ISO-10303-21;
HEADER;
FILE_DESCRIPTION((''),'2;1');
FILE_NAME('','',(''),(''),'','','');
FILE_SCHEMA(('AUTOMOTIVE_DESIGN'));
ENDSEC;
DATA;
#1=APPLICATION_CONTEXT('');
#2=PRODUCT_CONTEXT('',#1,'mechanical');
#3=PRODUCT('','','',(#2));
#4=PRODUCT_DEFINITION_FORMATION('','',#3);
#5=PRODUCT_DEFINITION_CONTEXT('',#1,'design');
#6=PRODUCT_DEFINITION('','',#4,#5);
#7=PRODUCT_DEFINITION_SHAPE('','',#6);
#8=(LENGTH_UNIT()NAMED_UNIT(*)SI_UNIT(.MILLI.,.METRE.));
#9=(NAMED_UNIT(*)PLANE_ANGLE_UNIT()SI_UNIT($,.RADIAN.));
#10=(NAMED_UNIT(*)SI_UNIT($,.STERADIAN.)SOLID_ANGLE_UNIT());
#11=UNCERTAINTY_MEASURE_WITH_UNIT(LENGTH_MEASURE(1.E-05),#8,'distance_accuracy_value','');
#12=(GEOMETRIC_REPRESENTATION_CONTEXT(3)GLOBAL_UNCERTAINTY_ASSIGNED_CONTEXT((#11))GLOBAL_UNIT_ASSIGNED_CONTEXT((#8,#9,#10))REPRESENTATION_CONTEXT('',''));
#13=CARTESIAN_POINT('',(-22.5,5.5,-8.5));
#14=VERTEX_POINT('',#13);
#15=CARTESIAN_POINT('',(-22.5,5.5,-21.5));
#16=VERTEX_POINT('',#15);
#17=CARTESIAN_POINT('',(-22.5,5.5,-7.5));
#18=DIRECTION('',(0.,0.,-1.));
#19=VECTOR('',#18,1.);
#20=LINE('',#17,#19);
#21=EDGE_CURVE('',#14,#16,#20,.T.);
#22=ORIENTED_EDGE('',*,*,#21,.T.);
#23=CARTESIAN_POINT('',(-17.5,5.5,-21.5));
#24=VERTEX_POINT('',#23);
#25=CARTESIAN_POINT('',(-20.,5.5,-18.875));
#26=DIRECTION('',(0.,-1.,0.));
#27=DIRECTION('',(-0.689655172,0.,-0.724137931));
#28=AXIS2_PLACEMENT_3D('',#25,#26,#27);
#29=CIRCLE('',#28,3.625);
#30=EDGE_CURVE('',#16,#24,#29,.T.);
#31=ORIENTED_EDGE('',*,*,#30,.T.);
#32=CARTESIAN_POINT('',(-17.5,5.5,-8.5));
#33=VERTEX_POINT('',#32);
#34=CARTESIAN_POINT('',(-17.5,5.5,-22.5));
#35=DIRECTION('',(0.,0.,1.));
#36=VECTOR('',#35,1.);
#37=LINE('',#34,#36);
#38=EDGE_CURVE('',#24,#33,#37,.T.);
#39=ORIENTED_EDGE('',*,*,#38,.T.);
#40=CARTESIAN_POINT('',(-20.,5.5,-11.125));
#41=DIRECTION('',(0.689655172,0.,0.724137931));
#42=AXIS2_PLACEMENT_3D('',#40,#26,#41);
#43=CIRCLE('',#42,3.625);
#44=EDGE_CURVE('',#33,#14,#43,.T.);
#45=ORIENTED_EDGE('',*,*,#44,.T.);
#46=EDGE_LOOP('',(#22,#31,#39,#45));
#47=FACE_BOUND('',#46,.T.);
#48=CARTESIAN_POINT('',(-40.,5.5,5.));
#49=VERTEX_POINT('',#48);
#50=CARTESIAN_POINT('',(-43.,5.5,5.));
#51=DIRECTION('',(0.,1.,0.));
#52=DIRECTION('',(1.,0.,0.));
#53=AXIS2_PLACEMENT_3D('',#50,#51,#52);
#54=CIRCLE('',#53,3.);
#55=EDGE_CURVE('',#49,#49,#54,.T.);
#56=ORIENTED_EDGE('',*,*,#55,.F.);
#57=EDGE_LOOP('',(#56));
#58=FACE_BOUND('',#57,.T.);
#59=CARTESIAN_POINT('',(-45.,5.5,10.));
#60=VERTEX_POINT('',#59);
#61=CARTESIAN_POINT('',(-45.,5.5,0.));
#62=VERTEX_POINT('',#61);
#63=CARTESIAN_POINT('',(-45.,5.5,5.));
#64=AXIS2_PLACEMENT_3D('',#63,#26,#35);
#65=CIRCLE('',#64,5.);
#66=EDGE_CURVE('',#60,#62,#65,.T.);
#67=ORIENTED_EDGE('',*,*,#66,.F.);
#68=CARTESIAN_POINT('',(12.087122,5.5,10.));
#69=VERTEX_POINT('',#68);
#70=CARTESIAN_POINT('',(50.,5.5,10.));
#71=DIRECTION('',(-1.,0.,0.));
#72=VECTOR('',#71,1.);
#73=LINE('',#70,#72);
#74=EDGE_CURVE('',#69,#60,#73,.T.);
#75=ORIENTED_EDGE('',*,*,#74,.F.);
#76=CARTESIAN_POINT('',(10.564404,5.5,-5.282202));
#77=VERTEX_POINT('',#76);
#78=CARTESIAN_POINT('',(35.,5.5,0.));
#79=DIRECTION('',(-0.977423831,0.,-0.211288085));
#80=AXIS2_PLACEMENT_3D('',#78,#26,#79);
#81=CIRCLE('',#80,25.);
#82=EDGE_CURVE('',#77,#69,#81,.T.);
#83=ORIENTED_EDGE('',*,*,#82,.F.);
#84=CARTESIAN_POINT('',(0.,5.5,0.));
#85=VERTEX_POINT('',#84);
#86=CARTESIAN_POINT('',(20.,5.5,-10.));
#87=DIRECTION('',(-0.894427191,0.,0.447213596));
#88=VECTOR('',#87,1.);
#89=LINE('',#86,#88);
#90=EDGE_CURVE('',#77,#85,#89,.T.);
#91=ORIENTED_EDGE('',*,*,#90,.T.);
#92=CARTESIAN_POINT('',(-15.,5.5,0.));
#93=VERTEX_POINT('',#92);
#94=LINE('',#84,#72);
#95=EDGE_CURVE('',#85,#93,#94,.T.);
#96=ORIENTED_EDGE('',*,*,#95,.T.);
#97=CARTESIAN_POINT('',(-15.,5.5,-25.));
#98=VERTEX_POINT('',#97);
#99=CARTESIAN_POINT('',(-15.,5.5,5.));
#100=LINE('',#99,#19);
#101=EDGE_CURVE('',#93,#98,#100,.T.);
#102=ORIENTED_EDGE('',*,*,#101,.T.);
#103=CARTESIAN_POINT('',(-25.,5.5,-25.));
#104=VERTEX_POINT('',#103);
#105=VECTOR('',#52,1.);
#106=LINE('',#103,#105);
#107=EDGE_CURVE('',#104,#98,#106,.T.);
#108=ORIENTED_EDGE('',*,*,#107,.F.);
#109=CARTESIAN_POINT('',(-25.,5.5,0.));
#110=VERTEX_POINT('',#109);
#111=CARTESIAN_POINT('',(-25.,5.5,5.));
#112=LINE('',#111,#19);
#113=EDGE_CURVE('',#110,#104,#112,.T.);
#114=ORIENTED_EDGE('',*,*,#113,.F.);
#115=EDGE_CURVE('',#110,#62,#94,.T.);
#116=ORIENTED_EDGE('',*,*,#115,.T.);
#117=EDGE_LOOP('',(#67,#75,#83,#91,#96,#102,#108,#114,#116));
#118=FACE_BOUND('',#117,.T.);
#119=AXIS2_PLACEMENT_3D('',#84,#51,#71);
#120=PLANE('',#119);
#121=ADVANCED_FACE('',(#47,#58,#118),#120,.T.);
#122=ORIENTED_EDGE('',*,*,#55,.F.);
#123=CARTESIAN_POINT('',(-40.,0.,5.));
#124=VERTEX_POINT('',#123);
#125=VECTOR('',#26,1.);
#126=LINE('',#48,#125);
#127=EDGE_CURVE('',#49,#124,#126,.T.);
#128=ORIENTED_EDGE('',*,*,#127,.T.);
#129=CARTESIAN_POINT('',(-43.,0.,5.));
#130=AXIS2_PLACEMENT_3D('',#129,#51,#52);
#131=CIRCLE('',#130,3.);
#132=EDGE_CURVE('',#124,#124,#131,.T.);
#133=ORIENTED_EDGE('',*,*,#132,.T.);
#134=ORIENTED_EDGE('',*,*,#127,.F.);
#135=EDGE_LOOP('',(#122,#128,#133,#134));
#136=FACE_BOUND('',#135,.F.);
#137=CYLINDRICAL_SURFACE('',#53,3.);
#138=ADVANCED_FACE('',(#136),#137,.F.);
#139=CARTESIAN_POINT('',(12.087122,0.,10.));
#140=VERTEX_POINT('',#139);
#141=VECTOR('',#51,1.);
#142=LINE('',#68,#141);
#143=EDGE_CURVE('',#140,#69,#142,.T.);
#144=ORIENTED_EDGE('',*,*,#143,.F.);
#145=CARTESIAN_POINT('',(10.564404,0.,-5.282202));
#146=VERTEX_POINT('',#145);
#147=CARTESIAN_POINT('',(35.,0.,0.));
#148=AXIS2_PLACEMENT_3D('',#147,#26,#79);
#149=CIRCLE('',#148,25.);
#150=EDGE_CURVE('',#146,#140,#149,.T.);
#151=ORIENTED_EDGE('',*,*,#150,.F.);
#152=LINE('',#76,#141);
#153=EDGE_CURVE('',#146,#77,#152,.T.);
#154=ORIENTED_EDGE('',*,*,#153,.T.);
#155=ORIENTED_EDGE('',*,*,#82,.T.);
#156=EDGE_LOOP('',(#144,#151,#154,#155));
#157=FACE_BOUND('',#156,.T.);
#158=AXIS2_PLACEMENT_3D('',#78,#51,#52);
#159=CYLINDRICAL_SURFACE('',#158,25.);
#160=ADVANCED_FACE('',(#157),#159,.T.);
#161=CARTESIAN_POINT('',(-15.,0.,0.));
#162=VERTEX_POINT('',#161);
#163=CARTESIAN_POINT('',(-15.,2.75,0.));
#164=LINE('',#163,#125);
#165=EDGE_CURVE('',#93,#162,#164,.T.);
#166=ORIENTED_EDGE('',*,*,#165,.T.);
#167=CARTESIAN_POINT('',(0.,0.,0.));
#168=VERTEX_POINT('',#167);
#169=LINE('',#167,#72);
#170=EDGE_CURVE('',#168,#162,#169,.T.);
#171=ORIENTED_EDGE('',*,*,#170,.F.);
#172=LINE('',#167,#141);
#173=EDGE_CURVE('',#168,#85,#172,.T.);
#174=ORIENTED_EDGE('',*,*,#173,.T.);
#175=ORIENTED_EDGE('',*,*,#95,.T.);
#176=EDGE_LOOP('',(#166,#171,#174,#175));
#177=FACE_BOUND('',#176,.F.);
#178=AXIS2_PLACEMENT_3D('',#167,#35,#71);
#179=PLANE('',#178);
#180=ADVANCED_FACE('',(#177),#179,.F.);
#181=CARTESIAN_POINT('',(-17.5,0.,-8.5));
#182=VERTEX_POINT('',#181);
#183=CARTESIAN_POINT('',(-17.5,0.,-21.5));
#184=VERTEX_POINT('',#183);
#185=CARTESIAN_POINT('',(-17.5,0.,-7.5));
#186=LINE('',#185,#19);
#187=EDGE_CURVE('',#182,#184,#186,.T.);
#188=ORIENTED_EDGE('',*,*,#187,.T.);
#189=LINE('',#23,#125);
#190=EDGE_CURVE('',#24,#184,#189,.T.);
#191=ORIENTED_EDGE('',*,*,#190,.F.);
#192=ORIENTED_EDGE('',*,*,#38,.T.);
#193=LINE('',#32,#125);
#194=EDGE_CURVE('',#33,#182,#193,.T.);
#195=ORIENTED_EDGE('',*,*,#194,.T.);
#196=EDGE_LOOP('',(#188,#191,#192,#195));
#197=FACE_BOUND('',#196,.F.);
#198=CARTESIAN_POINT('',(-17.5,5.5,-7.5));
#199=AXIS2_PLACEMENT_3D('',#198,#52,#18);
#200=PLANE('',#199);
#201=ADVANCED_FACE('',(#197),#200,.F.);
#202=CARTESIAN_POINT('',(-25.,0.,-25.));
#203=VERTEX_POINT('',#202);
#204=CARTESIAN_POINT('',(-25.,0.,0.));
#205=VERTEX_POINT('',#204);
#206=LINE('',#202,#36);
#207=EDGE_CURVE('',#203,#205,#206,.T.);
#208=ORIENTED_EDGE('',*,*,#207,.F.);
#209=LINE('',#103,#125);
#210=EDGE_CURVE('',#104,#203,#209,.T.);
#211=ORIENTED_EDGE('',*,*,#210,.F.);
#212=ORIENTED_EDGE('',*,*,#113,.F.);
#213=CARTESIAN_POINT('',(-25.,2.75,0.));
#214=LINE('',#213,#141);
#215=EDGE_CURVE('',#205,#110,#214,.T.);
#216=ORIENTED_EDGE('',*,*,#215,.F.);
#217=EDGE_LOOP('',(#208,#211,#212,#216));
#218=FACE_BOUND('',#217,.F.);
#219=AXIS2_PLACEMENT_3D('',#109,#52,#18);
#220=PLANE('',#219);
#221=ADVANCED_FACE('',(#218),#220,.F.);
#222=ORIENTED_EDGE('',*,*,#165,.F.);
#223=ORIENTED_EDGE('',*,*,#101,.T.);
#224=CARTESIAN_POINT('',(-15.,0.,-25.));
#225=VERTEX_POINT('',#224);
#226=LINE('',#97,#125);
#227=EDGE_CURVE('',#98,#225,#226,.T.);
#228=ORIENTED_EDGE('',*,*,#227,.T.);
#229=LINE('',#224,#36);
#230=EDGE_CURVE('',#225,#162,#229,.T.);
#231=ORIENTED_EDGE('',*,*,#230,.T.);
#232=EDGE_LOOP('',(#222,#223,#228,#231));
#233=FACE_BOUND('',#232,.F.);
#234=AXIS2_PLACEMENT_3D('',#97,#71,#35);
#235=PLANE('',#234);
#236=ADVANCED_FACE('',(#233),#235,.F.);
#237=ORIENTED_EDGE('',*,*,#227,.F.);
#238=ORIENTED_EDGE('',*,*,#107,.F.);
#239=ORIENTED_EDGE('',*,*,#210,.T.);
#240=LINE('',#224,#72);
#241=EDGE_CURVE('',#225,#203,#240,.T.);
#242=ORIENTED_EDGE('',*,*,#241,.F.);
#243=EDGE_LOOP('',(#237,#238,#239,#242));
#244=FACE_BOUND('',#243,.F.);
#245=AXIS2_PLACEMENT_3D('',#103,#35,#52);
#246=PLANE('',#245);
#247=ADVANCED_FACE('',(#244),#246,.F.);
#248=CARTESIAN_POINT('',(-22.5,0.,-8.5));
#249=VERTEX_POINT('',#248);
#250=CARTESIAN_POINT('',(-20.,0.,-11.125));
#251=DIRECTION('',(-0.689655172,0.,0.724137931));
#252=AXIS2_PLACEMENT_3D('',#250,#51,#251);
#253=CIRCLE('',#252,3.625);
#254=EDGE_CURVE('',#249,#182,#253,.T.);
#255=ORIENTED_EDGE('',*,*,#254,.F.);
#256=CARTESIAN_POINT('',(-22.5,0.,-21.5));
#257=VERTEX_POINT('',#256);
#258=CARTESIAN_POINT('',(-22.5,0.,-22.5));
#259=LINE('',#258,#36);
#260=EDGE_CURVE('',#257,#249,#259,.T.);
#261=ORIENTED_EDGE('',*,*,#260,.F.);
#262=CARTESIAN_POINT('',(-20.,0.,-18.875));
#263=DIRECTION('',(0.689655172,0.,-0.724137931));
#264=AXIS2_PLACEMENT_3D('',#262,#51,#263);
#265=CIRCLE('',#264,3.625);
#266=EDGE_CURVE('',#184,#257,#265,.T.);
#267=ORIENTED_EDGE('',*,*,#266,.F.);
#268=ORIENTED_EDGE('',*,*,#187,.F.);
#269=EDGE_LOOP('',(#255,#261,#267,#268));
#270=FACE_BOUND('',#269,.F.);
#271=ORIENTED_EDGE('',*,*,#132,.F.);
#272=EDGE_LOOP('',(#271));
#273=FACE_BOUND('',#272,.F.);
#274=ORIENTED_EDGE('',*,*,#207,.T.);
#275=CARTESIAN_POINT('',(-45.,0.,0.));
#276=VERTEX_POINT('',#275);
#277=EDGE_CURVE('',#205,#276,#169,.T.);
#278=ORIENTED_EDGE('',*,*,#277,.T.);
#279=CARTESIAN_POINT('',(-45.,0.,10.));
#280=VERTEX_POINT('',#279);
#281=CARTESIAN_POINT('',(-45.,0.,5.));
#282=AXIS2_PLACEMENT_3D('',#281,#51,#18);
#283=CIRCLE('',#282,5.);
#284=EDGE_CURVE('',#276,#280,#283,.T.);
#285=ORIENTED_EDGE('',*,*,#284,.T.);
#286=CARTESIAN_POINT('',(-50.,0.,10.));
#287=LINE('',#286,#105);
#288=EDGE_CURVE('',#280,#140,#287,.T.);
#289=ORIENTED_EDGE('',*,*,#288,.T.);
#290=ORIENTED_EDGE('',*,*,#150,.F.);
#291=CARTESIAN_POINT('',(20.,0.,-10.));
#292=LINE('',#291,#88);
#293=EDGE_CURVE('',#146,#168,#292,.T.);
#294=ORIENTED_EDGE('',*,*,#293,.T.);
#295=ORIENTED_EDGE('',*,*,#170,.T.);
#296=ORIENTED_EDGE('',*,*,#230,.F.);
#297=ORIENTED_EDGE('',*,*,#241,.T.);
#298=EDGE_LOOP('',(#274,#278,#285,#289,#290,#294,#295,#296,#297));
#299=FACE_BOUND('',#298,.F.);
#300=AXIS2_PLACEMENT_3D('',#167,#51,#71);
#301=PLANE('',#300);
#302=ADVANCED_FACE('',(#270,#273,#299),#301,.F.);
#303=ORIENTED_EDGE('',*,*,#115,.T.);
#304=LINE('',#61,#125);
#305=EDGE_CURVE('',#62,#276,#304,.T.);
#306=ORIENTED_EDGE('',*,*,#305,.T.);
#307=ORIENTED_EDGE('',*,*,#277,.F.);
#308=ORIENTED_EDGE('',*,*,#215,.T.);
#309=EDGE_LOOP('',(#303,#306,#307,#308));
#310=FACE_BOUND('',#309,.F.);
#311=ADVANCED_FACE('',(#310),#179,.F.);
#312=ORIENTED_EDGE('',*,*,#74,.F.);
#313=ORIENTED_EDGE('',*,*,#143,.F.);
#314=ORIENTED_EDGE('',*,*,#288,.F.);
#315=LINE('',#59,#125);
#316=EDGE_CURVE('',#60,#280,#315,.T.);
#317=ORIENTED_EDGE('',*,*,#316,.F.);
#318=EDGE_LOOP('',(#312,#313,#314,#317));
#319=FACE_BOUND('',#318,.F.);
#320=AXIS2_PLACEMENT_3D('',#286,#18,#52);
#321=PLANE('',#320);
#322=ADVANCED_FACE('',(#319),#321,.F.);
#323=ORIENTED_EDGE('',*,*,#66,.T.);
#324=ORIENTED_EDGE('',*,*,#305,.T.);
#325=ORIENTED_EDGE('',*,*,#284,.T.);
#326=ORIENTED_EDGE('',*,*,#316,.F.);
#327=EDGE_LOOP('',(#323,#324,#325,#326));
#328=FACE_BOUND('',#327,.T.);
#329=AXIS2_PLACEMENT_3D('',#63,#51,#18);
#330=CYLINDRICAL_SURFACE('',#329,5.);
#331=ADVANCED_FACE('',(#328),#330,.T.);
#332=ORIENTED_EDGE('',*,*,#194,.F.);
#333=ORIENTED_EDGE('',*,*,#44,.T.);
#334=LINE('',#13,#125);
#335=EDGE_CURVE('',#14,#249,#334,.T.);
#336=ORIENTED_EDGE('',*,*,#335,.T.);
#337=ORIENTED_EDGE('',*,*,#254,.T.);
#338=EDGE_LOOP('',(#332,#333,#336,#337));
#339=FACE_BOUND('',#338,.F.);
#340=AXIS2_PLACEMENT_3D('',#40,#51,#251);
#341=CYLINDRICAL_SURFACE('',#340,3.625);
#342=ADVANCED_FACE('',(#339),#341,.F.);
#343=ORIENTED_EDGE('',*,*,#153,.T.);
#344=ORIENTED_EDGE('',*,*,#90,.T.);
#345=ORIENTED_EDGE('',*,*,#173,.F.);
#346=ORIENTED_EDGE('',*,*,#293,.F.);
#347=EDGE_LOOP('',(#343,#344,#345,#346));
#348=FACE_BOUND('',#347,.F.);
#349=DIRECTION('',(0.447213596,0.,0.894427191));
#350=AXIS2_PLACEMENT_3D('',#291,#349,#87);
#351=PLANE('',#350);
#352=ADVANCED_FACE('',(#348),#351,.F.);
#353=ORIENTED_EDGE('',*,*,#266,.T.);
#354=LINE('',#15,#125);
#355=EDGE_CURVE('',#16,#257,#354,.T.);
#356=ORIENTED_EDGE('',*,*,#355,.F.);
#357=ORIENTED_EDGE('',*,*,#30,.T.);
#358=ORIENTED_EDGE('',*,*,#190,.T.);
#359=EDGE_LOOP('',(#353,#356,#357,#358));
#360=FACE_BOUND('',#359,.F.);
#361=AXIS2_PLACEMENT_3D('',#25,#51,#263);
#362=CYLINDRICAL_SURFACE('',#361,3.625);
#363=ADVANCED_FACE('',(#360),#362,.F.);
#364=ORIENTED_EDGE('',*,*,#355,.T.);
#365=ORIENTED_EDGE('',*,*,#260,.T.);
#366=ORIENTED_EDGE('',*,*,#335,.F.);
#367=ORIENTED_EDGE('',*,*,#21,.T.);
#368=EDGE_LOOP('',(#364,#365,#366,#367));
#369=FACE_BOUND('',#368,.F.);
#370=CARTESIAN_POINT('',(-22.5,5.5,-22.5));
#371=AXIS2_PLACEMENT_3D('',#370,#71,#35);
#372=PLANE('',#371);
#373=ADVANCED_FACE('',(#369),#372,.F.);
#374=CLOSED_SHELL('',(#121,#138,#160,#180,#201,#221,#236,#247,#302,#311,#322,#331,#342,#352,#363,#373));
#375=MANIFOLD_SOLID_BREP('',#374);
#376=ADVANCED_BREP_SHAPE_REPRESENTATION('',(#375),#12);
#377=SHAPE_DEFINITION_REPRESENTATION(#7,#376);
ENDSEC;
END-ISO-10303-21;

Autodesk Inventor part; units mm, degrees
ref_plane "YZ Plane" through (0, 0, 0) normal (1, 0, 0) x (0, 1, 0)
ref_plane "XZ Plane" through (0, 0, 0) normal (0, 1, 0) x (-1, 0, 0)
ref_plane "XY Plane" through (0, 0, 0) normal (0, 0, 1) x (1, 0, 0)
sketch "Boceto1" plane through (0, 0, 0) normal (0, 1, 0) x (-1, 0, 0)
  line L0 (50, 10) -> (-50, 10)
  line L1 (-50, 10) -> (-50, -10)
  line L2 (-50, -10) -> (50, -10)
  line L3 (50, -10) -> (50, 10)
  line L4 (50, 10) -> (-50, -10) construction
  line L5 (-50, 10) -> (50, -10) construction
  line L6 (-50, -10) -> (-20, -10)
  line L7 (-20, -10) -> (0, 0)
  line L8 (0, 0) -> (50, 0)
  line L9 (0, 0) -> (0, 10)
  dimension "d0" = 100
  dimension "d1" = 20
  dimension "d2" = 30
extrude "Extrusión1" add sketch "Boceto1" along normal blind 5.5 contours L3 L8 L9 L0
extrude "Extrusión2" add sketch "Boceto1" along normal blind 5.5 contours L9 L7 L2 L1 L0
sketch "Boceto2" plane through (0, 5.5, 0) normal (0, 1, 0) x (1, 0, 0)
  line L0 (-50, 0) -> (-50, -10) projected
  line L1 (-50, -10) -> (-45, -10)
  line L2 (-50, -10) -> (50, -10) projected
  line L3 (-45, -10) -> (-45, 0)
  line L4 (0, 0) -> (-50, 0) projected
  arc A0 (-45, 0) -> (-45, -10) centre (-45, -5) ccw
  line L5 (-50, -5) -> (-25, -5)
  line L6 (-25, -5) -> (-25, 25)
  line L7 (-25, 25) -> (-15, 25)
  line L8 (-15, 25) -> (-15, -5)
  line L9 (-15, -5) -> (-25, -5)
  line L10 (-20, 25) -> (-20, 5)
  line L11 (-22.5, 7.5) -> (-17.5, 7.5)
  line L12 (-17.5, 7.5) -> (-17.5, 22.5)
  line L13 (-17.5, 22.5) -> (-22.5, 22.5)
  line L14 (-22.5, 22.5) -> (-22.5, 7.5)
  line L15 (-22.5, 7.5) -> (-17.5, 22.5) construction
  line L16 (-17.5, 7.5) -> (-22.5, 22.5) construction
  line L17 (-22.5, 22.5) -> (-22.5, 21.5)
  line L18 (-22.5, 21.5) -> (-17.5, 21.5)
  line L19 (-22.5, 15) -> (-17.5, 15)
  arc A1 (-17.5, 21.5) -> (-22.5, 21.5) centre (-20, 18.875) ccw
  arc A2 (-22.5, 8.5) -> (-17.5, 8.5) centre (-20, 11.125) ccw
  line L20 (-25, -5) -> (-20, -5)
  line L21 (-20, -5) -> (-20, -10)
  line L22 (-20, -10) -> (-25, -10)
  line L23 (-25, -10) -> (-25, -5)
  point P0 (0, -10)
  point P1 (-20, 15)
  point P2 (-50, -5)
  point P3 (-25, 0)
  point P4 (-15, 0)
  point P5 (-20, 22.5)
  point P6 (-20, 7.5)
  point P7 (-22.5, 8.5)
  point P8 (-17.5, 8.5)
  point P9 (-20, -5)
  dimension "d7" = 5
  dimension "d8" = 25
  dimension "d9" = 30
  dimension "d10" = 10
  dimension "d11" = 20
  dimension "d12" = 5
  dimension "d13" = 15
  dimension "d14" = 1
extrude "Extrusión3" cut sketch "Boceto2" against normal blind 5.5 contours L4 A0 L0 | A0 L1 L0
extrude "Extrusión4" add sketch "Boceto2" against normal blind 5.5 contours L6 L7 L8 L4 | L4 L8 L9 L6
extrude "Extrusión5" add sketch "Boceto2" against normal blind 5.5 contours A1 L14 L13 | L13 L12 A1 | A2 L12 L11 | L11 L14 A2
sketch "Boceto3" plane through (0, 5.5, 0) normal (0, 1, 0) x (1, 0, 0)
  arc A0 (-45, 0) -> (-45, -10) centre (-45, -5) ccw projected
  line L0 (-45, -5) -> (-43, -5)
  circle A1 centre (-43, -5) radius 3
  point P0 (0, 0)
  dimension "d21" = 2
  dimension "d22" = 6
extrude "Extrusión6" cut sketch "Boceto3" against normal blind 5.5
sketch "Boceto4" plane through (0, 5.5, 0) normal (0, 1, 0) x (1, 0, 0)
  line L0 (0, 0) -> (50, 0)
  line L1 (50, -10) -> (50, 10) projected
  line L2 (50, 10) -> (20, 10) projected
  line L3 (20, 10) -> (20, 0)
  line L4 (50, 0) -> (20, 0)
  circle A0 centre (35, 0) radius 25
  dimension "d27" = 50
extrude "Extrusión7" add sketch "Boceto4" against normal blind 5.5
sketch "Boceto5" plane through (0, 5.5, 0) normal (0, 1, 0) x (1, 0, 0)
  line L0 (-22.5, 8.5) -> (-22.5, 21.5) projected
  arc A0 (-22.5, 8.5) -> (-17.5, 8.5) centre (-20, 11.125) ccw projected
  line L1 (-17.5, 21.5) -> (-17.5, 8.5) projected
  circle A1 centre (-43, -5) radius 3 projected
  line L2 (-43, -5) -> (-20, -5)
  line L3 (-20, -5) -> (-20, 11.125)
  line L4 (-20, 11.125) -> (-43, -5)
  line L5 (-22.5, 13.75) -> (-17.5, 13.75)
  point P0 (0, 0)
properties part number "PINZA_D"
